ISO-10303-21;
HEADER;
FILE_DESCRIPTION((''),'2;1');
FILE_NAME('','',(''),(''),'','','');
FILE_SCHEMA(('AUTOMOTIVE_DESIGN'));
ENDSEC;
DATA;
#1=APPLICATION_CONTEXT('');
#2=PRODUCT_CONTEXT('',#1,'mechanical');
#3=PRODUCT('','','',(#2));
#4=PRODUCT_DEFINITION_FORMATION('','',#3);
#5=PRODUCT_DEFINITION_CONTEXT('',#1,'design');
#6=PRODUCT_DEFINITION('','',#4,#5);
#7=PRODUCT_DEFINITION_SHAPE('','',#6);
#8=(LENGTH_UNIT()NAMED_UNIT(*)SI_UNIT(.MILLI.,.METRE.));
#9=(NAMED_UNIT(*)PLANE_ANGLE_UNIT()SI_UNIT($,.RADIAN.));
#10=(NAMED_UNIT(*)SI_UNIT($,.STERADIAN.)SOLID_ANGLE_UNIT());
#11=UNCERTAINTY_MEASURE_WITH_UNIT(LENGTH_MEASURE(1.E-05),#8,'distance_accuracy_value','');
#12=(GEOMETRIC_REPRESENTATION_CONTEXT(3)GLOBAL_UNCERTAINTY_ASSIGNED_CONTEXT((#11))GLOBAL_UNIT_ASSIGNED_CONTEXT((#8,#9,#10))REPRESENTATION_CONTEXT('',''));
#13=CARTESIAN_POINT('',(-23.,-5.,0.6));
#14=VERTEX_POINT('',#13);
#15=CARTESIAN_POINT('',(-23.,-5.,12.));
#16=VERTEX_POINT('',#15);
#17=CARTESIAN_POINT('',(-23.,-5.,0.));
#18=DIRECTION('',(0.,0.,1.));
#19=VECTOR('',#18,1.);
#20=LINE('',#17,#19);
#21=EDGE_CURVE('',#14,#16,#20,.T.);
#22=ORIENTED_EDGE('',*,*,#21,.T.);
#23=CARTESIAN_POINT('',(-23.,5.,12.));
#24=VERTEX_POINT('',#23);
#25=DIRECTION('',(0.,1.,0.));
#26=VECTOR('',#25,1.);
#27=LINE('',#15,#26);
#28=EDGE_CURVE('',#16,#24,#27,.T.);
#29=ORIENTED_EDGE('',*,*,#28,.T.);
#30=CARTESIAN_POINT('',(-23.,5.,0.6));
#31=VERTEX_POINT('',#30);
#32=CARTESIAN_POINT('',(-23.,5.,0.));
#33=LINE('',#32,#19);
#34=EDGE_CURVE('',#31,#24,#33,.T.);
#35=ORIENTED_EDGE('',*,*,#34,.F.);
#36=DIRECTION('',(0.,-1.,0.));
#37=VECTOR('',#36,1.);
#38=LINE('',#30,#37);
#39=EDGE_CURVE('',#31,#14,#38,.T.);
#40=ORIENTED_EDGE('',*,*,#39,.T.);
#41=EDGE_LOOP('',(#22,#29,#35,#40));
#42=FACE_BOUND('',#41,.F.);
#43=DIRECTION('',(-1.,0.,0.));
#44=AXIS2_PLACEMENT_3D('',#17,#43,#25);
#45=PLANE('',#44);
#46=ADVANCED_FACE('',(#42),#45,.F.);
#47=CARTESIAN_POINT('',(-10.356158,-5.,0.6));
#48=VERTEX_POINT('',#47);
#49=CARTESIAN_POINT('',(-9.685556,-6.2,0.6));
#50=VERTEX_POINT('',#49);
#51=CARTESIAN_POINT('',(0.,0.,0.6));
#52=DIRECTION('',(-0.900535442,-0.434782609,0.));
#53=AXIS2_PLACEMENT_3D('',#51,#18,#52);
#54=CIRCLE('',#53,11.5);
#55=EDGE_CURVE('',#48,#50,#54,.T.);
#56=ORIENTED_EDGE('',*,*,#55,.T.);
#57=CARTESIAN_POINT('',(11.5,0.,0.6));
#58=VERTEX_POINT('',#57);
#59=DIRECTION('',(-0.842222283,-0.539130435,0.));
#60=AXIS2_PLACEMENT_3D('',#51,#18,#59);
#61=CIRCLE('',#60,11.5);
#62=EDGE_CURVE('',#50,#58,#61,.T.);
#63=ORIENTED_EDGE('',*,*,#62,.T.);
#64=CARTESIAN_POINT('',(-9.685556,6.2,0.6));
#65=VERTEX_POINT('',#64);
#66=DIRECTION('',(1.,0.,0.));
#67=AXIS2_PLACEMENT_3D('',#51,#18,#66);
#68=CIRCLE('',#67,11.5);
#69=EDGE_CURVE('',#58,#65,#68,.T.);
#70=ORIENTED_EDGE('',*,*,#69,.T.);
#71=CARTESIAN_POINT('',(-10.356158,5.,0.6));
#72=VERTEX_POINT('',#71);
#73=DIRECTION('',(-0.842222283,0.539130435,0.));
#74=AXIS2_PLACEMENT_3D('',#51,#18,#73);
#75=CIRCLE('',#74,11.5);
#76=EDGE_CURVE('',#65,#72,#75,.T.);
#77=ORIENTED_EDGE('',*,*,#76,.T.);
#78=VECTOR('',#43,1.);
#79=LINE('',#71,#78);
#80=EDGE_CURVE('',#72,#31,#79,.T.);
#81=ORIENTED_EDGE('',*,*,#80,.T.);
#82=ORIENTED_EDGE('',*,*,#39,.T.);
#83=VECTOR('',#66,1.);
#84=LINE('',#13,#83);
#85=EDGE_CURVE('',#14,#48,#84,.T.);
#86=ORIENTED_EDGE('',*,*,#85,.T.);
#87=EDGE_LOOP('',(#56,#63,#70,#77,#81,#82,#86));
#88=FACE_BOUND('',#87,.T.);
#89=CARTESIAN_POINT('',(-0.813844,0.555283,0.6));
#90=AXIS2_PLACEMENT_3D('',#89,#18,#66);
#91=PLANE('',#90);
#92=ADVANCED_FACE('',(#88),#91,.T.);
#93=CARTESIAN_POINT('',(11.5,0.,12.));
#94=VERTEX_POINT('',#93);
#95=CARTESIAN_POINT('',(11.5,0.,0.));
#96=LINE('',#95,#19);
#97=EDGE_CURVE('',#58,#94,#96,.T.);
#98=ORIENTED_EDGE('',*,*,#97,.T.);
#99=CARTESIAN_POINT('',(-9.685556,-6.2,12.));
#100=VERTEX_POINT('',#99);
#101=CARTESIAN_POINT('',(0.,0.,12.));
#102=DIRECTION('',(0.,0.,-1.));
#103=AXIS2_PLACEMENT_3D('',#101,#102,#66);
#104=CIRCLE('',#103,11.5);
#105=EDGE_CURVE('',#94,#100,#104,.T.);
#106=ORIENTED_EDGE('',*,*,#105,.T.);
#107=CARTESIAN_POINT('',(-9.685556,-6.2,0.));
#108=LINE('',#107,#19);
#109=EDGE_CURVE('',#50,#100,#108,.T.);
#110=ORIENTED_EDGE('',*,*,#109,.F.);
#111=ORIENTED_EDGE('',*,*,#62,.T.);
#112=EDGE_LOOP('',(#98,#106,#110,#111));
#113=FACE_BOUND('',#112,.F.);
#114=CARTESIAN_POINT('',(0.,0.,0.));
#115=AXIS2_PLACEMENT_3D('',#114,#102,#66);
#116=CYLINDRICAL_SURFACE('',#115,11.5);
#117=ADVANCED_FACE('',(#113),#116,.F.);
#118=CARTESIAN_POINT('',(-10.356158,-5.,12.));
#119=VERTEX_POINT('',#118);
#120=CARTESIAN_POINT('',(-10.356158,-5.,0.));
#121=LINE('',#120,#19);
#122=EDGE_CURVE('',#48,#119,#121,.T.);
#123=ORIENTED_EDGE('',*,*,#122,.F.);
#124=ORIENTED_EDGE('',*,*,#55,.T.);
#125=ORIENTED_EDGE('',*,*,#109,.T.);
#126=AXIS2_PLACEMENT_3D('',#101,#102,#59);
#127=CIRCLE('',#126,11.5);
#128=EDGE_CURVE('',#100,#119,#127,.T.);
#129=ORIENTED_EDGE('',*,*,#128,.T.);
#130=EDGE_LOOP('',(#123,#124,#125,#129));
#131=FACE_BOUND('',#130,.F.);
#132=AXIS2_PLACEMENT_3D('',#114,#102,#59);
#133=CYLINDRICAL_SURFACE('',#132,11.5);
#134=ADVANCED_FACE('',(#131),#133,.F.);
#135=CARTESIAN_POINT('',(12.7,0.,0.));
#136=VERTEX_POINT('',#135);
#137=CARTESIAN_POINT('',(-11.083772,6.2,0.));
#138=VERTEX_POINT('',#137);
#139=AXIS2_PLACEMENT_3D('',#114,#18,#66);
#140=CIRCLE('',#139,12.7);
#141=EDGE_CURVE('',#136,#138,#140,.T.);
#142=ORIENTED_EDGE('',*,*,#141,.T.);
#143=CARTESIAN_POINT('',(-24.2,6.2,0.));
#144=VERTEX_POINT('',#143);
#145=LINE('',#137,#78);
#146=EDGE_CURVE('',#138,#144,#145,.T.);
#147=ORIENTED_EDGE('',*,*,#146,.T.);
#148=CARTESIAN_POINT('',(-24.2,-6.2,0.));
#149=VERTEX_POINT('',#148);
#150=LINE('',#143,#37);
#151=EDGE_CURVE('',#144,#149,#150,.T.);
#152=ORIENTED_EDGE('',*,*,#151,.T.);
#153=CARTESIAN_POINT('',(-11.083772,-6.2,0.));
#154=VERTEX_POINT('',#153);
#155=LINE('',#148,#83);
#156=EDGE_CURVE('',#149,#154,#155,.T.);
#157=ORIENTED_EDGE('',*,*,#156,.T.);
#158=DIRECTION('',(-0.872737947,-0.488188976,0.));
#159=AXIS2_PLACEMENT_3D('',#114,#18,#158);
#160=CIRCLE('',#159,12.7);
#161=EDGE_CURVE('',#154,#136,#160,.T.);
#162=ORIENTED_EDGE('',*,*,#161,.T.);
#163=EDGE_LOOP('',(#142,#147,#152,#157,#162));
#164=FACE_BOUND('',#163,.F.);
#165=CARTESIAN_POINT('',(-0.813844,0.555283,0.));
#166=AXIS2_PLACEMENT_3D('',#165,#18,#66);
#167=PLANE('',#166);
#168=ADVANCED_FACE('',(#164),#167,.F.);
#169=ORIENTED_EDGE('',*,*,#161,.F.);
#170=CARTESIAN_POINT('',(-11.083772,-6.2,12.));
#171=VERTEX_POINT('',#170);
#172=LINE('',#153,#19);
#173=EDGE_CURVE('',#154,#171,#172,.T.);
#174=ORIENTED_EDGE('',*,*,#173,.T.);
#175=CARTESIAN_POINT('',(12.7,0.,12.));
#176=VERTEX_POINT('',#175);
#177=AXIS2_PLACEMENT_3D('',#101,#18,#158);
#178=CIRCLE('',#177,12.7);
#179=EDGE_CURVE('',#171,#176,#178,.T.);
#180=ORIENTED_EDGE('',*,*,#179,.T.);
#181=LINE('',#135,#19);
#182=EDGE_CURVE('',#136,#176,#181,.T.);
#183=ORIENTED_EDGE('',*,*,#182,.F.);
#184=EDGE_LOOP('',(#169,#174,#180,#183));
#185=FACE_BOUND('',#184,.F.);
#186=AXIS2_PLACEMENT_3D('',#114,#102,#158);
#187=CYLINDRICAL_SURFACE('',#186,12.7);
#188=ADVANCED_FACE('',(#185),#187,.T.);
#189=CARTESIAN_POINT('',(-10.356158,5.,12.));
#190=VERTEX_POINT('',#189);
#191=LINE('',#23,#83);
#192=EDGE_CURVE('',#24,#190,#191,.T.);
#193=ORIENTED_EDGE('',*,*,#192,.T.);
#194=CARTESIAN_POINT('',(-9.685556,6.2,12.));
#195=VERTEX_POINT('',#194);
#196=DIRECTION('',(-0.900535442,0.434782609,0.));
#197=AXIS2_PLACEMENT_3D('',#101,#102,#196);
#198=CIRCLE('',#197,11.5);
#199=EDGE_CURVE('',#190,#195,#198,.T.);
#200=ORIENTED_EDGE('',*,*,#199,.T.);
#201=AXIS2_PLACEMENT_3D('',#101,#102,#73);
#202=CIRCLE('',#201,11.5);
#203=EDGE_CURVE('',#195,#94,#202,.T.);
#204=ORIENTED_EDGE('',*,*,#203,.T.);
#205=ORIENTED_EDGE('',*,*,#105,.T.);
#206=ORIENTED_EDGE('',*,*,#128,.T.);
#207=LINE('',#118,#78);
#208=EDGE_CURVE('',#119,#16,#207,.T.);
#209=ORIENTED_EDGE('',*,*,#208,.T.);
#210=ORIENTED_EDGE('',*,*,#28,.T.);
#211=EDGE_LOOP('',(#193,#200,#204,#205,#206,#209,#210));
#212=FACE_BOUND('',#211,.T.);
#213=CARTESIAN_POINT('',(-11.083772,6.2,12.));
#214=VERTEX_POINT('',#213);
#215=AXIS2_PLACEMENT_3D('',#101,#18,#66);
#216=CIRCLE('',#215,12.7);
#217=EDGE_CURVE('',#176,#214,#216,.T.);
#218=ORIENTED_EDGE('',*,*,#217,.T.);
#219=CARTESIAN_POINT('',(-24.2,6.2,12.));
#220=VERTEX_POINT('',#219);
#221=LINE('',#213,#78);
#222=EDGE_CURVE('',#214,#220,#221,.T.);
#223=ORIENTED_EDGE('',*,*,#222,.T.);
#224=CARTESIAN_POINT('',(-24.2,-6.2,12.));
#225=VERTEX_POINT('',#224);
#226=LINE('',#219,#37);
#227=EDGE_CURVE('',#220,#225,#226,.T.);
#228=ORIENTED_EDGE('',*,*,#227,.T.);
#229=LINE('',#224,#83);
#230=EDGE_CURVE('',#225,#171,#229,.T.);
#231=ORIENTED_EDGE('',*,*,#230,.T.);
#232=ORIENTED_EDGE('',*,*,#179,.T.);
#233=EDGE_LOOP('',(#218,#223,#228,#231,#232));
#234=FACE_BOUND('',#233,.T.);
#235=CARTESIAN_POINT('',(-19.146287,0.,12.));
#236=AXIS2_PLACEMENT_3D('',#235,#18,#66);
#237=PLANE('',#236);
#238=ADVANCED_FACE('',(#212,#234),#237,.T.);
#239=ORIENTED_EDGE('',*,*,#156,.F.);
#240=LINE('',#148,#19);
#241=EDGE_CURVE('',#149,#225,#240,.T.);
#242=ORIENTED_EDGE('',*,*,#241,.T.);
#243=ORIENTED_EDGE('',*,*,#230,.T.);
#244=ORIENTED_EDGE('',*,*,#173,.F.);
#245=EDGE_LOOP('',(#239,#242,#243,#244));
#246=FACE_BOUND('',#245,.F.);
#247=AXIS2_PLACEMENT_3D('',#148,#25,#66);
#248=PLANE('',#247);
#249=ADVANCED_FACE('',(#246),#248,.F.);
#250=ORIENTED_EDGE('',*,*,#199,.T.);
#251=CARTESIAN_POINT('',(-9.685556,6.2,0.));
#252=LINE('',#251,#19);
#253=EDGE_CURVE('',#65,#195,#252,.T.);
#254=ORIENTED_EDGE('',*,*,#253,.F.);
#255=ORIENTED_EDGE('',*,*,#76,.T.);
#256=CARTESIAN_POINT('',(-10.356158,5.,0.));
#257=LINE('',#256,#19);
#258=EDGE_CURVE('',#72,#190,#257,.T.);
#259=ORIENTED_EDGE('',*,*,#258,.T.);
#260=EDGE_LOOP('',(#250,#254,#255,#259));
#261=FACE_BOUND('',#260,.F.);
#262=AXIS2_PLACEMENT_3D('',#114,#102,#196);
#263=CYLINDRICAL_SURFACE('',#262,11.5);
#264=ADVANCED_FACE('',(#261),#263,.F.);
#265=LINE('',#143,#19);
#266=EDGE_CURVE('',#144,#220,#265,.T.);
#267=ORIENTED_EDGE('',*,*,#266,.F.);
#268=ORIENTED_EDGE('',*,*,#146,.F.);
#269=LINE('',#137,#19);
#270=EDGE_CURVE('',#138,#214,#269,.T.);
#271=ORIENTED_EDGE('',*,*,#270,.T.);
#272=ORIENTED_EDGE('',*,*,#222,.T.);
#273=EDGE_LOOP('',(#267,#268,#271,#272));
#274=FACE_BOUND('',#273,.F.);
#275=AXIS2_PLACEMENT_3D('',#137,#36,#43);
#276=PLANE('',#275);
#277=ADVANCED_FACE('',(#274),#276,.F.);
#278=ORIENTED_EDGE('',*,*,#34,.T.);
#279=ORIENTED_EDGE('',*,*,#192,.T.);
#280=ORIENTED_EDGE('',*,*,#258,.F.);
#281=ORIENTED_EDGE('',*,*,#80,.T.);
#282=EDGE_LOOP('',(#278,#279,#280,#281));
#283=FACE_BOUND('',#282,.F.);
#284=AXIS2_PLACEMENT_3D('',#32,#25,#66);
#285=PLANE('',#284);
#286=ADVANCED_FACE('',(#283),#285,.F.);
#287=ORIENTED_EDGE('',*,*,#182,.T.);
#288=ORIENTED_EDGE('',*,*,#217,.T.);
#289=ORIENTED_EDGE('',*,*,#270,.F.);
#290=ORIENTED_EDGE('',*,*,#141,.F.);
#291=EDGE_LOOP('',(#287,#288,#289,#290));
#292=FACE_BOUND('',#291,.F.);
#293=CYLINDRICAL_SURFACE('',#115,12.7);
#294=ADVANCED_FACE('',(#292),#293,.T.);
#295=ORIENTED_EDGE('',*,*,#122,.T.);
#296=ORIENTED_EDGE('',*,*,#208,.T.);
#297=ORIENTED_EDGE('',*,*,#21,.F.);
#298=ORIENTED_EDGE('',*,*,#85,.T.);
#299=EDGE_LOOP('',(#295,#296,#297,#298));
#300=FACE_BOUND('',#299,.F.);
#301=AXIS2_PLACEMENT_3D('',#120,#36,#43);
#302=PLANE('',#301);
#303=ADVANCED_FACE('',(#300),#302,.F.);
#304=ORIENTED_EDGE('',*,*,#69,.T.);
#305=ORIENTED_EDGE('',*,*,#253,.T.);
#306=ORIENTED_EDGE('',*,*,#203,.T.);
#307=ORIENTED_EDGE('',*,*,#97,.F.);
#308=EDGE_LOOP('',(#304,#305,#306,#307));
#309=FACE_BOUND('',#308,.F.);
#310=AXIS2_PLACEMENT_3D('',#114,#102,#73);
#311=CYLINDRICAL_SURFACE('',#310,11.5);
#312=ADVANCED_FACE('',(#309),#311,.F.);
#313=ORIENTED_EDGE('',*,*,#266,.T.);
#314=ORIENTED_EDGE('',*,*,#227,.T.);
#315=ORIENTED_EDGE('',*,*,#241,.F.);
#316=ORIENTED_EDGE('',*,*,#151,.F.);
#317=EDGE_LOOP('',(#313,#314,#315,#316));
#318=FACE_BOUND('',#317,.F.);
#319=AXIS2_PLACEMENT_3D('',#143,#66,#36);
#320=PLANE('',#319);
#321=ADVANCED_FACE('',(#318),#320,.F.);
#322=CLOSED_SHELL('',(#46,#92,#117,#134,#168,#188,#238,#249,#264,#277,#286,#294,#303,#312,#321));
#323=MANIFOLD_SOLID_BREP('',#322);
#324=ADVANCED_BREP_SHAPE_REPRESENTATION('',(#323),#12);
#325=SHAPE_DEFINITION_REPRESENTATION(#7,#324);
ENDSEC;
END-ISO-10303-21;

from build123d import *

# Parameters (mm, degrees)
F1_DEPTH = 12
F2_DEPTH = 0.6


with BuildPart() as f1:
    # F0 (on Top) → F1 (new body)
    with BuildSketch(Plane.XY):
        with BuildLine():
            ThreePointArc((-11.6743308159, 5), (-11.3948589306, 5.6077794136), (-11.0837719211, 6.2))
            Line((-11.0837719211, 6.2), (-24.2, 6.2))
            Line((-24.2, 6.2), (-24.2, 0))
            Line((-24.2, 0), (-24.2, -6.2))
            Line((-24.2, -6.2), (-11.0837719211, -6.2))
            ThreePointArc((-11.0837719211, -6.2), (-11.3948589306, -5.6077794136), (-11.6743308159, -5))
            Line((-11.6743308159, -5), (-23, -5))
            Line((-23, -5), (-23, 0))
            Line((-23, 0), (-23, 5))
            Line((-23, 5), (-11.6743308159, 5))
        make_face()
        with BuildLine():
            ThreePointArc((-9.6855562566, 6.2), (3.2300234557, 11.0370715534), (11.5, 0))
            ThreePointArc((11.5, 0), (3.2300234557, -11.0370715534), (-9.6855562566, -6.2))
            Line((-9.6855562566, -6.2), (-11.0837719211, -6.2))
            ThreePointArc((-11.0837719211, -6.2), (3.2035992728, -12.2893023276), (12.7, 0))
            ThreePointArc((12.7, 0), (3.2035992728, 12.2893023276), (-11.0837719211, 6.2))
            Line((-11.0837719211, 6.2), (-9.6855562566, 6.2))
        make_face()
        with BuildLine():
            ThreePointArc((-10.3561575886, 5), (-10.038803388, 5.610029103), (-9.6855562566, 6.2))
            Line((-9.6855562566, 6.2), (-11.0837719211, 6.2))
            ThreePointArc((-11.0837719211, 6.2), (-11.3948589306, 5.6077794136), (-11.6743308159, 5))
            Line((-11.6743308159, 5), (-10.3561575886, 5))
        make_face()
        with BuildLine():
            Line((-11.0837719211, -6.2), (-9.6855562566, -6.2))
            ThreePointArc((-9.6855562566, -6.2), (-10.038803388, -5.610029103), (-10.3561575886, -5))
            Line((-10.3561575886, -5), (-11.6743308159, -5))
            ThreePointArc((-11.6743308159, -5), (-11.3948589306, -5.6077794136), (-11.0837719211, -6.2))
        make_face()
    extrude(amount=F1_DEPTH)

    # F0 (on Top) → F2 (join)
    with BuildSketch(Plane.XY):
        with BuildLine():
            ThreePointArc((-9.6855562566, -6.2), (3.2300234557, -11.0370715534), (11.5, 0))
            ThreePointArc((11.5, 0), (3.2300234557, 11.0370715534), (-9.6855562566, 6.2))
            ThreePointArc((-9.6855562566, 6.2), (-10.038803388, 5.610029103), (-10.3561575886, 5))
            Line((-10.3561575886, 5), (0, 5))
            Line((0, 5), (0, 0))
            Line((0, 0), (-11.5, 0))
            ThreePointArc((-11.5, 0), (-11.2103927734, -2.5645845405), (-10.3561575886, -5))
            ThreePointArc((-10.3561575886, -5), (-10.038803388, -5.610029103), (-9.6855562566, -6.2))
        make_face()
        with BuildLine():
            ThreePointArc((-12.7, 0), (-12.4409405063, 2.5520578596), (-11.6743308159, 5))
            Line((-11.6743308159, 5), (-23, 5))
            Line((-23, 5), (-23, 0))
            Line((-23, 0), (-12.7, 0))
        make_face()
        with BuildLine():
            Line((0, 5), (-10.3561575886, 5))
            ThreePointArc((-10.3561575886, 5), (-11.2103927734, 2.5645845405), (-11.5, 0))
            Line((-11.5, 0), (0, 0))
            Line((0, 0), (0, 5))
        make_face()
        with BuildLine():
            ThreePointArc((-11.5, 0), (-11.2103927734, 2.5645845405), (-10.3561575886, 5))
            Line((-10.3561575886, 5), (-11.6743308159, 5))
            ThreePointArc((-11.6743308159, 5), (-12.4409405063, 2.5520578596), (-12.7, 0))
            Line((-12.7, 0), (-11.5, 0))
        make_face()
        with BuildLine():
            Line((-23, -5), (-11.6743308159, -5))
            ThreePointArc((-11.6743308159, -5), (-12.4409405063, -2.5520578596), (-12.7, 0))
            Line((-12.7, 0), (-23, 0))
            Line((-23, 0), (-23, -5))
        make_face()
        with BuildLine():
            Line((-11.6743308159, -5), (-10.3561575886, -5))
            ThreePointArc((-10.3561575886, -5), (-11.2103927734, -2.5645845405), (-11.5, 0))
            Line((-11.5, 0), (-12.7, 0))
            ThreePointArc((-12.7, 0), (-12.4409405063, -2.5520578596), (-11.6743308159, -5))
        make_face()
    extrude(amount=F2_DEPTH)


solid = f1.part
